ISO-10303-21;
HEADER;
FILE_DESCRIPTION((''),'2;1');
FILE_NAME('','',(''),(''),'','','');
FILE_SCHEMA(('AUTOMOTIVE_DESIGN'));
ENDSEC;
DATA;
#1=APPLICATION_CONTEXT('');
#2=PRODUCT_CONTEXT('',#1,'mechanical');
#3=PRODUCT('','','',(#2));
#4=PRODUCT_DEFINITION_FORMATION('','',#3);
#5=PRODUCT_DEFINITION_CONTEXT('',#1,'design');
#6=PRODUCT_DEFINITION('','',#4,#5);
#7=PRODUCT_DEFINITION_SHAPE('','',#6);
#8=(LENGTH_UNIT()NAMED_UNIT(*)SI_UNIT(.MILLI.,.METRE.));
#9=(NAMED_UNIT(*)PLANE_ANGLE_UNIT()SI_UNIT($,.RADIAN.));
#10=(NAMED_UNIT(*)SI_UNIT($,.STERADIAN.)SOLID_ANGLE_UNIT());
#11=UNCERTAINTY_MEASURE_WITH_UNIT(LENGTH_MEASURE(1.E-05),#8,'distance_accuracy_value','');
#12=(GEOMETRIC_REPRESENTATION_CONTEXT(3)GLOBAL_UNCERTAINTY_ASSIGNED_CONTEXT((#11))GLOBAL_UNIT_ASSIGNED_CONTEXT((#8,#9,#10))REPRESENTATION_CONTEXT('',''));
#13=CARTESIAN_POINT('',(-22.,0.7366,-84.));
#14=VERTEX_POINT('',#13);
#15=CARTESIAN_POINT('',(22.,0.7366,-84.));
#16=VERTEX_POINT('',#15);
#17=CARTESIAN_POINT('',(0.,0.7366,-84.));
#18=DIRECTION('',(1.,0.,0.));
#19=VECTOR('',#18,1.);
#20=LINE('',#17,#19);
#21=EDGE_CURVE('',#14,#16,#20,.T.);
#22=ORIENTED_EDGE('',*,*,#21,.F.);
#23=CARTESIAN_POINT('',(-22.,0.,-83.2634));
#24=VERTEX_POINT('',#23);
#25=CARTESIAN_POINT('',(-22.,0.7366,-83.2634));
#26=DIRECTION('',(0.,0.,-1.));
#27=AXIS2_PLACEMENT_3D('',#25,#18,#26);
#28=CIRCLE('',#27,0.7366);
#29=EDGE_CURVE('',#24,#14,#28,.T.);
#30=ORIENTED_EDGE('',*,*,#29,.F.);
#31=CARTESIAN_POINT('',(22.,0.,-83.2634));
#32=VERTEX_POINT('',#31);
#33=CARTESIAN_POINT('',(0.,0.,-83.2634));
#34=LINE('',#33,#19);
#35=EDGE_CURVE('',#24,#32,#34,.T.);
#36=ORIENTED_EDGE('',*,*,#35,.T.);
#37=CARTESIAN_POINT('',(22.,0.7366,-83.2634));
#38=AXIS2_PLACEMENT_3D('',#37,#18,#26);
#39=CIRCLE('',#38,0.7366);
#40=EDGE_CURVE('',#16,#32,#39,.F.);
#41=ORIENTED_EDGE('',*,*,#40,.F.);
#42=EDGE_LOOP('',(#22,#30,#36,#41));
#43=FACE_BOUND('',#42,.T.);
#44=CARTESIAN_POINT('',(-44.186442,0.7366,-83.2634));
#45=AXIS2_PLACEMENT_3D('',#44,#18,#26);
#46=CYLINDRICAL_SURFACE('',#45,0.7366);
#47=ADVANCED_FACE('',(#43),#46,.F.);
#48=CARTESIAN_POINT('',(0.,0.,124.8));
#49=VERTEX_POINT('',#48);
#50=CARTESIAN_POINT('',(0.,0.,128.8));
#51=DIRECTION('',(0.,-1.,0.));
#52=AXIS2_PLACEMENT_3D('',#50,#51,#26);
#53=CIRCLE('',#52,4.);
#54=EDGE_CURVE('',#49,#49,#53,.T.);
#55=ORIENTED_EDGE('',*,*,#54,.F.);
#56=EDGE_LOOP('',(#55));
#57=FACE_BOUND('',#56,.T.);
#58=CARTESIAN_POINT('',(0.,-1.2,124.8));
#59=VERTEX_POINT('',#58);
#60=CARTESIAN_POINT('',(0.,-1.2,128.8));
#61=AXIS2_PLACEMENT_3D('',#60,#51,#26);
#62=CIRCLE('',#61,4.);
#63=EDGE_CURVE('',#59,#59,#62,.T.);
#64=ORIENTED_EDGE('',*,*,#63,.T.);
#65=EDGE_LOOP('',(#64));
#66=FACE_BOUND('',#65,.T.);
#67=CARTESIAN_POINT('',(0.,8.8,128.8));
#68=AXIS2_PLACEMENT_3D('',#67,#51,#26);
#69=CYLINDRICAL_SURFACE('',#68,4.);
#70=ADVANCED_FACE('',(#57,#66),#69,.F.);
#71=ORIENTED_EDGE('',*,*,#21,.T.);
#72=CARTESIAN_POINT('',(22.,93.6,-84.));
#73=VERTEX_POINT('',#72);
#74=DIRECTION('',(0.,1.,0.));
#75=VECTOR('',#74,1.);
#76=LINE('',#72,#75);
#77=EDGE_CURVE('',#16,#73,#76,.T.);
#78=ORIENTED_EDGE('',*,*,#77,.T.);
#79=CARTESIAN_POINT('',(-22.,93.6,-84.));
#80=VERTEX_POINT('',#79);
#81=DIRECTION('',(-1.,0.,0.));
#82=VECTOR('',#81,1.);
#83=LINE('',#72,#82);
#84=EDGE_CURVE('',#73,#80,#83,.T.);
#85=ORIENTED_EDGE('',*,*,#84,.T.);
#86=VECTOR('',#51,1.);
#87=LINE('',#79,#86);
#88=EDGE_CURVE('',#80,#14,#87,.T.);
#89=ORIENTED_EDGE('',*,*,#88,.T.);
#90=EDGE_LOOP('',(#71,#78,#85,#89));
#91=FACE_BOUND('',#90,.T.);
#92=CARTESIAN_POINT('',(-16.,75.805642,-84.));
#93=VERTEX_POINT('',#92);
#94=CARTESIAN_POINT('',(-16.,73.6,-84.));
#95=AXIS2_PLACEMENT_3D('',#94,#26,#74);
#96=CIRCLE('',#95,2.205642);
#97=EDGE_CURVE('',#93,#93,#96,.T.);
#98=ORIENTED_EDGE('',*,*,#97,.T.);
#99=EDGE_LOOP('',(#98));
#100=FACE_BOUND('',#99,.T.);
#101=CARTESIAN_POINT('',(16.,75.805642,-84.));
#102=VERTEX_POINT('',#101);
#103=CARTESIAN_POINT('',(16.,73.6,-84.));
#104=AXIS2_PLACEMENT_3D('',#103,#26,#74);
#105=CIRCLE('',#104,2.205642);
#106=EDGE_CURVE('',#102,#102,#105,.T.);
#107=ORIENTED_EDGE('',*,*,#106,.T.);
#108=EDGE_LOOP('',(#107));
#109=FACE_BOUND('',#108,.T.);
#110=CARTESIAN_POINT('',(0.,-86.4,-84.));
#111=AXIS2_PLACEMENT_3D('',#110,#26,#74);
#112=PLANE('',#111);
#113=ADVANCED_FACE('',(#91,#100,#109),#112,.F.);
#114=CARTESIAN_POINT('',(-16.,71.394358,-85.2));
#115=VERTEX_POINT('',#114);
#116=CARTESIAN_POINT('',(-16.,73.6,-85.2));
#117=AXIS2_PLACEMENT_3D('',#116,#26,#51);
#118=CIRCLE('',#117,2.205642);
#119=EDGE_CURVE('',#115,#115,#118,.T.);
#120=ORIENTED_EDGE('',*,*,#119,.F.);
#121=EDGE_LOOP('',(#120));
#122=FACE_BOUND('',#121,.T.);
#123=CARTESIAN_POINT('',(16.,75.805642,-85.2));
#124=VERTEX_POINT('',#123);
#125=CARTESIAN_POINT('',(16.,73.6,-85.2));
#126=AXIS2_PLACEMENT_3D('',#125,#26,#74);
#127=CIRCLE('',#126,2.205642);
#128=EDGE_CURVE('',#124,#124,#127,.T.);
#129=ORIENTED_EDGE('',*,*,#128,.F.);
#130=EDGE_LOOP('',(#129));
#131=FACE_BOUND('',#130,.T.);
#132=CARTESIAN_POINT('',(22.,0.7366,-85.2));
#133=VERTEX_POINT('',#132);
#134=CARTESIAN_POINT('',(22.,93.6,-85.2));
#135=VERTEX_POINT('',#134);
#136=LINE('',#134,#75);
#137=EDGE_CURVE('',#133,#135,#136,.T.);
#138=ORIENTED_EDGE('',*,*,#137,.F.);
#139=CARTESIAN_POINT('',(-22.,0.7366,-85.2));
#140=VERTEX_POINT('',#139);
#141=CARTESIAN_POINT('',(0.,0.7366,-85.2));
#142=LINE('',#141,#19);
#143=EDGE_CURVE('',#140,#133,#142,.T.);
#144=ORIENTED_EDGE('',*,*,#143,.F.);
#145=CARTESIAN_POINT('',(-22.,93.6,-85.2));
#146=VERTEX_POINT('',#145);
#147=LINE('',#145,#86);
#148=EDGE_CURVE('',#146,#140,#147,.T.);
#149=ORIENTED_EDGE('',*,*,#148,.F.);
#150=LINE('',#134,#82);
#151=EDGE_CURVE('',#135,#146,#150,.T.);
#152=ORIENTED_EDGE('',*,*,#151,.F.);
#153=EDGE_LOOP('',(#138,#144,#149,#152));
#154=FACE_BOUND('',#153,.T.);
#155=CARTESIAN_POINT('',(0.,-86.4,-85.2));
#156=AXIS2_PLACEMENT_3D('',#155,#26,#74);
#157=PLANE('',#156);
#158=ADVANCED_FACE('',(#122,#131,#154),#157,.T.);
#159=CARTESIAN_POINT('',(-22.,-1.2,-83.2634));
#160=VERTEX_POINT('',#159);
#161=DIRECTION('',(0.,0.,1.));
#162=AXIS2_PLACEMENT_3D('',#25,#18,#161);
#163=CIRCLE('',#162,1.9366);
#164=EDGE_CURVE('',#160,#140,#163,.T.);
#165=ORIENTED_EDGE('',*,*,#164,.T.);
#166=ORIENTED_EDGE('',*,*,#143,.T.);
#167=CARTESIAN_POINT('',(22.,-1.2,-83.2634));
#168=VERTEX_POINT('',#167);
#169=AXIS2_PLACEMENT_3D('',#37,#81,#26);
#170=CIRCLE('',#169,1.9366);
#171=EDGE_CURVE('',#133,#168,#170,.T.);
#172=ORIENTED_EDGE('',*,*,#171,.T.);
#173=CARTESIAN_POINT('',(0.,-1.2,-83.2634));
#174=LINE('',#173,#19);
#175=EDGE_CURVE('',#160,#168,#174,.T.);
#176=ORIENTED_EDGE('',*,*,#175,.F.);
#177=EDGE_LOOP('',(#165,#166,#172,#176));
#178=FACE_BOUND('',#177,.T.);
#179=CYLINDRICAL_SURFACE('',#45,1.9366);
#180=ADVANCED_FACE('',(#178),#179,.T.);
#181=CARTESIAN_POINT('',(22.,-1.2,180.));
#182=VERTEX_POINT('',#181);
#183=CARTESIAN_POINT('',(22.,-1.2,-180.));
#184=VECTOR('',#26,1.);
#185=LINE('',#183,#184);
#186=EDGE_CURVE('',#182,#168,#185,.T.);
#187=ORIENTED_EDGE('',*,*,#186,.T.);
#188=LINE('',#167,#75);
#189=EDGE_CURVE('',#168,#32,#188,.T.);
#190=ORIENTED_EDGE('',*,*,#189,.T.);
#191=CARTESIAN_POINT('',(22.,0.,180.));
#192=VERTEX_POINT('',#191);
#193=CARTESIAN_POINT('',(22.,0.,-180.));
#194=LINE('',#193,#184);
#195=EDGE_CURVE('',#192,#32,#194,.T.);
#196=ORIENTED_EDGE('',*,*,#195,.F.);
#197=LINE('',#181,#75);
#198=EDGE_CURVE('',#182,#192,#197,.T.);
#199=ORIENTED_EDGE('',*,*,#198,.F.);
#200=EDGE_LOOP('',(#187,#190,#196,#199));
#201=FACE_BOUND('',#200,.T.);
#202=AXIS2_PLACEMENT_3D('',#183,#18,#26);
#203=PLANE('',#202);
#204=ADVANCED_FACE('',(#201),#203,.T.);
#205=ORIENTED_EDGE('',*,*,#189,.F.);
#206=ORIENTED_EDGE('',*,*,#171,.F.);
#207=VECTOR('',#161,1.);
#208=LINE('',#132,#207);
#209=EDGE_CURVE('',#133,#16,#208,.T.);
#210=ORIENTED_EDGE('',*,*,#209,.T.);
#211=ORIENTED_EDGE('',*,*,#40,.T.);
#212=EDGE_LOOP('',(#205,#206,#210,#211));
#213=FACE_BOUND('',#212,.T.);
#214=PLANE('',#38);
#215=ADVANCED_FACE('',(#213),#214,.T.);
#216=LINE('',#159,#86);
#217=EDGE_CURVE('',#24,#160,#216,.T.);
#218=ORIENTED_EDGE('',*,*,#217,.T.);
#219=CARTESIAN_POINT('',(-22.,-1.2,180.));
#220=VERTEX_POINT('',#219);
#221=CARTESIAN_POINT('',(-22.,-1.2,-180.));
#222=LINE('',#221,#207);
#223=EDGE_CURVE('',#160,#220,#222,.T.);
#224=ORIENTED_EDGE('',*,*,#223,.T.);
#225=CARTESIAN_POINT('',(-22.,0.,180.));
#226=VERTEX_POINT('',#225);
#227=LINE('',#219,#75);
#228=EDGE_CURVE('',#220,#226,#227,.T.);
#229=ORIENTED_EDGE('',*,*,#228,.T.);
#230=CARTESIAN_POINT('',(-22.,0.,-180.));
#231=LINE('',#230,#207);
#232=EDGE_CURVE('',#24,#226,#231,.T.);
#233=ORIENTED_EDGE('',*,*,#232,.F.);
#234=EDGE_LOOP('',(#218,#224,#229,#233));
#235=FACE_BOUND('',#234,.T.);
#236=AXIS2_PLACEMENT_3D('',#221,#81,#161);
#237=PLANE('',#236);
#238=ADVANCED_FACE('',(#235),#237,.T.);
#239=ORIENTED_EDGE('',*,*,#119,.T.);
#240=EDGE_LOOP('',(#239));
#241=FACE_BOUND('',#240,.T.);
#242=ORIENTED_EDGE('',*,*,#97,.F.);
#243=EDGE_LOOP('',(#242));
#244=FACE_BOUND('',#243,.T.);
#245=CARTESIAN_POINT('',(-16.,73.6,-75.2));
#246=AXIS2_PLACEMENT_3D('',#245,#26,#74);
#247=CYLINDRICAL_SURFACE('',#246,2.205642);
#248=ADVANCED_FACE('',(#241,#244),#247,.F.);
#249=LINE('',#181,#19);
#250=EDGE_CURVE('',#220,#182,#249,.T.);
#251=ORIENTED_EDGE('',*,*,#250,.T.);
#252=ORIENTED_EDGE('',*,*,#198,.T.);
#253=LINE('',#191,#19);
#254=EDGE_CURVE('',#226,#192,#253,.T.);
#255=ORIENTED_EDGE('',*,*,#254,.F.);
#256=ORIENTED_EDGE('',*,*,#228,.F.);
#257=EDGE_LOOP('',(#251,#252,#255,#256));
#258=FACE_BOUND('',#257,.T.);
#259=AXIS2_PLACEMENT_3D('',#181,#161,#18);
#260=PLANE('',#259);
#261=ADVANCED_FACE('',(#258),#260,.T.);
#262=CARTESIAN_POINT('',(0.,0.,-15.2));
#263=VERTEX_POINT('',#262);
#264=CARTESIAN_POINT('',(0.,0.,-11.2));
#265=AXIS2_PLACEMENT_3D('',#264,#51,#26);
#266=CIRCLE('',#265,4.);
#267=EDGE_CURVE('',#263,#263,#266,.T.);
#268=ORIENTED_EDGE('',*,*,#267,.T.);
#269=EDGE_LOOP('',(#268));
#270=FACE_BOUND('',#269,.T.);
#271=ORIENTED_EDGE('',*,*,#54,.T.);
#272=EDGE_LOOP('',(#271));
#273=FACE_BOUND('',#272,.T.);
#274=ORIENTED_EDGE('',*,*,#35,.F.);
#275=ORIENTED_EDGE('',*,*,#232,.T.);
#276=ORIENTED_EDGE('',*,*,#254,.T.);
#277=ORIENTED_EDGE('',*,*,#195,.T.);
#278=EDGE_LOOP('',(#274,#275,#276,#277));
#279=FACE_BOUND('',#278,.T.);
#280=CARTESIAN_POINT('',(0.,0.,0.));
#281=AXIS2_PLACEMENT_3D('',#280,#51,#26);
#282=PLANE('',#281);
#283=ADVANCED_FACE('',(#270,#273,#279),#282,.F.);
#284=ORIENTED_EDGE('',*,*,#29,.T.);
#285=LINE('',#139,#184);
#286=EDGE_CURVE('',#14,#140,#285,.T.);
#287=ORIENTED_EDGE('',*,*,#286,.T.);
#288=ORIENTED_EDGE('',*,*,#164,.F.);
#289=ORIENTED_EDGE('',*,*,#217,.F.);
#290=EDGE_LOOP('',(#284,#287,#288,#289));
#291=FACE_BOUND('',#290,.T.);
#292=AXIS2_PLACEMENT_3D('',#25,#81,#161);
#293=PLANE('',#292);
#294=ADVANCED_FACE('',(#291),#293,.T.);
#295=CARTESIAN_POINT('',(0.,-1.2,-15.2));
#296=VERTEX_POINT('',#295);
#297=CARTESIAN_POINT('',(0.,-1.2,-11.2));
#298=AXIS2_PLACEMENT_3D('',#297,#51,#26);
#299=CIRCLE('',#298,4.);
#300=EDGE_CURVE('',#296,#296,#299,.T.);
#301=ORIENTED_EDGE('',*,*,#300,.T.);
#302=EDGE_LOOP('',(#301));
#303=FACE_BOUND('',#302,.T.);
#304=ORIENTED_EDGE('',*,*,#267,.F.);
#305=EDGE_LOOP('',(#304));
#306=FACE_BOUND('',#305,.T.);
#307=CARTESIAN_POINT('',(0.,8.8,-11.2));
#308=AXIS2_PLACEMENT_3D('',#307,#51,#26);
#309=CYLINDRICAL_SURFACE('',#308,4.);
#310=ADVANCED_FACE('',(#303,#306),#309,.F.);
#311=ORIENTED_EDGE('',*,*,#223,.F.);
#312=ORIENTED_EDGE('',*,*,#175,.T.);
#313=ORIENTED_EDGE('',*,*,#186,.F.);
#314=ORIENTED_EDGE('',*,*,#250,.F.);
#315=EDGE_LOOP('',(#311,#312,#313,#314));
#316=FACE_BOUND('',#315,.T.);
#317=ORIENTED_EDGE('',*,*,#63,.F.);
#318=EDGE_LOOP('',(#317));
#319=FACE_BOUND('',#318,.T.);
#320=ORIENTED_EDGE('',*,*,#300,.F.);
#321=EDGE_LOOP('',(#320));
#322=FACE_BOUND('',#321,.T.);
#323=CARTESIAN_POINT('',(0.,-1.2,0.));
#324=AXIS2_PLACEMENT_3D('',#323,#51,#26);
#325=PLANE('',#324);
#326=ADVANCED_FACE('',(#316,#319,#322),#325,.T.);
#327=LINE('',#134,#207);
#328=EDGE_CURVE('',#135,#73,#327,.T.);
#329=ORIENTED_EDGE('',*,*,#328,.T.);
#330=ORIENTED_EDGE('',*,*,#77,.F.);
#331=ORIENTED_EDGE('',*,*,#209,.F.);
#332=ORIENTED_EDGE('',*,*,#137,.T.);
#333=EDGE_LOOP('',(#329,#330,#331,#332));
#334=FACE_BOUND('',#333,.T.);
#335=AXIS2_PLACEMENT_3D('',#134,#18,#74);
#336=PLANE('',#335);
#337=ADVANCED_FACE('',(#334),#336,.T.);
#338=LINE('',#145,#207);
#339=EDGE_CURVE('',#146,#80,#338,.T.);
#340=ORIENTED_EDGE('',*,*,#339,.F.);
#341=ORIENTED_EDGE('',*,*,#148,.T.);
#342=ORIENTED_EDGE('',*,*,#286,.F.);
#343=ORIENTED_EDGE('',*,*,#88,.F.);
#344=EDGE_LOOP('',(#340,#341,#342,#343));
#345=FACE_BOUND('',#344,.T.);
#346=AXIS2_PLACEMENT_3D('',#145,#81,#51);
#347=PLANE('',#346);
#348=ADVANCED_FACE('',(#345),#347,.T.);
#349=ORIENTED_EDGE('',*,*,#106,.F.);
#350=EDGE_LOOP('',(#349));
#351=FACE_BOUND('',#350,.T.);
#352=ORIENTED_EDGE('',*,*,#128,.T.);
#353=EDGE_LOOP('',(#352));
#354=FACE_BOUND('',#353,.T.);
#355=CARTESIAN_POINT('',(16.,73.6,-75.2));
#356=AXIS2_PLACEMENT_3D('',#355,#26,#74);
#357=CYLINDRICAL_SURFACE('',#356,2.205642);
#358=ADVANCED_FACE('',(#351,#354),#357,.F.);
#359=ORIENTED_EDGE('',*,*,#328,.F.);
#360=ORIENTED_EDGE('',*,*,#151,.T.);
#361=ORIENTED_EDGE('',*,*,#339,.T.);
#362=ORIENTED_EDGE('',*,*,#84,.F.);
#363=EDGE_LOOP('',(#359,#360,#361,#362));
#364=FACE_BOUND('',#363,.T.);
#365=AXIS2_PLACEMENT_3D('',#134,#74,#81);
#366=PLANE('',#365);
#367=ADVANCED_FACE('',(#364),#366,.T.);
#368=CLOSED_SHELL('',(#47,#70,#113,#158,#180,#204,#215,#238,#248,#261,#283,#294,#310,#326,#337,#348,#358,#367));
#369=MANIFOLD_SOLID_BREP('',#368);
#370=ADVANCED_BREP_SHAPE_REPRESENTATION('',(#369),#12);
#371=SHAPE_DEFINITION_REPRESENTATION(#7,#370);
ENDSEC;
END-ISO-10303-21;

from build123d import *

# Parameters (mm, degrees)
SKETCH1_W              = 44
SKETCH1_H              = 360
BASE_FLANGE1_DEPTH     = 1.2
SKETCHED_START         = -22
SKETCHED_BEND1_DEPTH   = 44
SKETCHED_BEND1_2_DEPTH = 44
SKETCH7_R              = 2.205641569
CUT_EXTRUDE1_DEPTH     = 10
SKETCH8_R              = 4
CUT_EXTRUDE2_DEPTH     = 10


# Read off the part's stored shape, not the designer's step: Sketched Bend1
# Sheet-metal steps are written as plain solids
with BuildPart() as part:
    # Sketch1 → Base-Flange1 (new body)
    with BuildSketch(Plane(origin=(0, 0, 0), x_dir=(1, 0, 0), z_dir=(0, 1, 0))):
        Rectangle(SKETCH1_W, SKETCH1_H)
    extrude(amount=-BASE_FLANGE1_DEPTH)

    # Sketched Bend1 outline → Sketched Bend1 (cut)
    with BuildSketch(Plane.YZ.offset(SKETCHED_START)):
        with BuildLine():
            Line((0, -180), (0, -85.054444388))
            ThreePointArc((0, -85.054444388), (-0.872269031, -84.341342484), (-1.2, -83.2634))
            Line((-1.2, -83.2634), (-1.2, -180))
            Line((-1.2, -180), (0, -180))
        make_face()
    extrude(amount=SKETCHED_BEND1_DEPTH, mode=Mode.SUBTRACT)

    # Sketched Bend1 2 outline → Sketched Bend1 2 (add)
    with BuildSketch(Plane.YZ.offset(SKETCHED_START)):
        with BuildLine():
            Line((93.6, -84), (0.7366, -84))
            ThreePointArc((0.7366, -84), (0.215745145, -83.784254855), (0, -83.2634))
            Line((0, -83.2634), (0, -85.054444388))
            ThreePointArc((0, -85.054444388), (0.361178238, -85.163262642), (0.7366, -85.2))
            Line((0.7366, -85.2), (93.6, -85.2))
            Line((93.6, -85.2), (93.6, -84))
        make_face()
    extrude(amount=SKETCHED_BEND1_2_DEPTH)

    # Sketch7 → Cut-Extrude1 (cut)
    with BuildSketch(Plane(origin=(0, 0, -85.2), x_dir=(-1, 0, 0), z_dir=(0, 0, -1))):
        with Locations(Location((-16, 73.6, 0), (0, 0, 90))):
            Circle(SKETCH7_R)
        with Locations(Location((16, 73.6, 0), (0, 0, 90))):
            Circle(SKETCH7_R)
    extrude(amount=-CUT_EXTRUDE1_DEPTH, mode=Mode.SUBTRACT)

    # Sketch8 → Cut-Extrude2 (cut)
    with BuildSketch(Plane.XZ.offset(1.2)):
        with Locations(Location((0, -11.2, 0), (0, 0, 270))):
            Circle(SKETCH8_R)
        with Locations(Location((0, 128.8, 0), (0, 0, 270))):
            Circle(SKETCH8_R)
    extrude(amount=-CUT_EXTRUDE2_DEPTH, mode=Mode.SUBTRACT)


solid = part.part
